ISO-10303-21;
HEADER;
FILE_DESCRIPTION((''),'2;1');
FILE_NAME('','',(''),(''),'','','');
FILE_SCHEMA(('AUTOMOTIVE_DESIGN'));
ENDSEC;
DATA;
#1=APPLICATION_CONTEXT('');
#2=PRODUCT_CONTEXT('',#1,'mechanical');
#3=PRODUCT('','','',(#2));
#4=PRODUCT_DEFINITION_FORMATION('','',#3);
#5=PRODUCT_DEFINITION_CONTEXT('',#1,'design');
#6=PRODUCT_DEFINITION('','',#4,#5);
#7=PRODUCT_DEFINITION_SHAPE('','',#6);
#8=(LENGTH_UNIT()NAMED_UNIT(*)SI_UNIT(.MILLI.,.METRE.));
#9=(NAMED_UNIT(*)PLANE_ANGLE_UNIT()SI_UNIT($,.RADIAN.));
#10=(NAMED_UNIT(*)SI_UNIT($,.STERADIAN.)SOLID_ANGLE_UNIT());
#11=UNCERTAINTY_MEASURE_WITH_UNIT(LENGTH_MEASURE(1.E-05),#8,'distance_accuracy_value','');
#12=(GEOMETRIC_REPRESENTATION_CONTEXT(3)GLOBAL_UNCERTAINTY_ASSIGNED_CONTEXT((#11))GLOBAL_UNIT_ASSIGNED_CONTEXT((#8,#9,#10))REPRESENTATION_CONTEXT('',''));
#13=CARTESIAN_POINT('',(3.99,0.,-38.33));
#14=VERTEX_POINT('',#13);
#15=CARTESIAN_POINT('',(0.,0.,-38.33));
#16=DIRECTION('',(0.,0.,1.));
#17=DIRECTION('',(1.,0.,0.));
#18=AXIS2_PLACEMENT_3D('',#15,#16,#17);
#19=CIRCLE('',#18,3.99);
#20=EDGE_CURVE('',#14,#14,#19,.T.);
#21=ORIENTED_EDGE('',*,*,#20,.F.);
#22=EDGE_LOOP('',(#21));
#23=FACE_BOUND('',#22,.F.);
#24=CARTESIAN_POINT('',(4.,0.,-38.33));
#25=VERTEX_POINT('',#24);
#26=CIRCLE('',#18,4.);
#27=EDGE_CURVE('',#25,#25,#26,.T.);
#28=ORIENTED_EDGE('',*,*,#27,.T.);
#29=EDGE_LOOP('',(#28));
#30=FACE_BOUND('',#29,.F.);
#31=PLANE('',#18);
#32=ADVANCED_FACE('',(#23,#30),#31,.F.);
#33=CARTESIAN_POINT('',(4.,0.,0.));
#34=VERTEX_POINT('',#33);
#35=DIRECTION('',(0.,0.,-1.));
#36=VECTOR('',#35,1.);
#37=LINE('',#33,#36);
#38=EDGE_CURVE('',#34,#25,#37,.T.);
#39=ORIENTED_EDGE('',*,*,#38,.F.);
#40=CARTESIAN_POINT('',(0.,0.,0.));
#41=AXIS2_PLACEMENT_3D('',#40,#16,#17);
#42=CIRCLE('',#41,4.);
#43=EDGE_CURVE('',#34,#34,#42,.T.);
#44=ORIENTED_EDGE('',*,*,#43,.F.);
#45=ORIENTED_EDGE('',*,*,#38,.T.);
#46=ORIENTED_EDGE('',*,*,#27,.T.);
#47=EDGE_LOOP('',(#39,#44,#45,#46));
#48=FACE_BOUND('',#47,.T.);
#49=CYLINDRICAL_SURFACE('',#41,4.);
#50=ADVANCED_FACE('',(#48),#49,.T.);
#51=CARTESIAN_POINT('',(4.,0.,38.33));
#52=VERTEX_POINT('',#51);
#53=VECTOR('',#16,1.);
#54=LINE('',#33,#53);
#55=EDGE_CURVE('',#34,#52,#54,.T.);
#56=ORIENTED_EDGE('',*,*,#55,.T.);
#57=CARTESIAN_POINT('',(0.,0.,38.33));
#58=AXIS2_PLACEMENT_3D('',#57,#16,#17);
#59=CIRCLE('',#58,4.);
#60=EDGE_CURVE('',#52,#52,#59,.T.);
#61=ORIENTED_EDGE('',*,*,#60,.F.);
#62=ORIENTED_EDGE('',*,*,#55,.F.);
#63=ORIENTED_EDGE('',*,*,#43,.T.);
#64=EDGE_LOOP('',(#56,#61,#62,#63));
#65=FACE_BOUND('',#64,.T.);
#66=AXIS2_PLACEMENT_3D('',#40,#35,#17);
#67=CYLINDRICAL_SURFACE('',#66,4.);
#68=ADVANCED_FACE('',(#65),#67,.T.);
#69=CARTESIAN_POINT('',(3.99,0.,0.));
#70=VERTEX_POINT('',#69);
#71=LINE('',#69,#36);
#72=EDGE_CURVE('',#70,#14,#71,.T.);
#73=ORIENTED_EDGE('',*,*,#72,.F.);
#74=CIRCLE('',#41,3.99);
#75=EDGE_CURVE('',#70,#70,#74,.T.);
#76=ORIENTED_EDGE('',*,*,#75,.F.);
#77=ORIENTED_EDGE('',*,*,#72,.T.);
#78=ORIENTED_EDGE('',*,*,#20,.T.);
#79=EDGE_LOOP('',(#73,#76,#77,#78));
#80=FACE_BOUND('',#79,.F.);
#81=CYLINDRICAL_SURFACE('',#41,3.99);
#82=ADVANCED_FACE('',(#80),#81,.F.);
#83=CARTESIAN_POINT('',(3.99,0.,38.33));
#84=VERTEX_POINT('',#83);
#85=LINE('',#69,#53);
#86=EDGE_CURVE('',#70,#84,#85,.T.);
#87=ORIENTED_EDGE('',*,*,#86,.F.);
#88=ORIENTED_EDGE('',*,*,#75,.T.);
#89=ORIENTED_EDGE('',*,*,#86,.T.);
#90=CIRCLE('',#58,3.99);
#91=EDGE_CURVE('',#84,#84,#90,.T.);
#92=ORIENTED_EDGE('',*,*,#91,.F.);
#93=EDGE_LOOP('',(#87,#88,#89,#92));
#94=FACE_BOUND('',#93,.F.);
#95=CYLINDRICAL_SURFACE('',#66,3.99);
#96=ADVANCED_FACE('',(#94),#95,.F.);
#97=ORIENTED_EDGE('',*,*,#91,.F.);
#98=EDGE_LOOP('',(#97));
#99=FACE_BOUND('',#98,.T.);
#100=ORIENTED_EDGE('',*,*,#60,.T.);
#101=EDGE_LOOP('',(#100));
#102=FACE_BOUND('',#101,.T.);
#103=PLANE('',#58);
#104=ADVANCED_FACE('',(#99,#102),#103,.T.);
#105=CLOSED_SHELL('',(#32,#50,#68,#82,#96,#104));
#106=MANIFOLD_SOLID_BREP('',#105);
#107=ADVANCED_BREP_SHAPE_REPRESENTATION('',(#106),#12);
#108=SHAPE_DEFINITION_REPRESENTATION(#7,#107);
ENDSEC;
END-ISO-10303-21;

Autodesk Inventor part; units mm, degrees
ref_plane "YZ Plane" through (0, 0, 0) normal (1, 0, 0) x (0, 1, 0)
ref_plane "XZ Plane" through (0, 0, 0) normal (0, 1, 0) x (-1, 0, 0)
ref_plane "XY Plane" through (0, 0, 0) normal (0, 0, 1) x (1, 0, 0)
sketch "Sketch1" plane through (0, 0, 0) normal (0, 0, 1) x (1, 0, 0)
  circle A0 centre (0, 0) radius 4
  circle A1 centre (0, 0) radius 3.99
  dimension "d0" = 8
  dimension "d1" = 0.01
extrude "Extrusion1" add sketch "Sketch1" along normal mid plane 76.66
properties part number "Cartridge-Plastic"
